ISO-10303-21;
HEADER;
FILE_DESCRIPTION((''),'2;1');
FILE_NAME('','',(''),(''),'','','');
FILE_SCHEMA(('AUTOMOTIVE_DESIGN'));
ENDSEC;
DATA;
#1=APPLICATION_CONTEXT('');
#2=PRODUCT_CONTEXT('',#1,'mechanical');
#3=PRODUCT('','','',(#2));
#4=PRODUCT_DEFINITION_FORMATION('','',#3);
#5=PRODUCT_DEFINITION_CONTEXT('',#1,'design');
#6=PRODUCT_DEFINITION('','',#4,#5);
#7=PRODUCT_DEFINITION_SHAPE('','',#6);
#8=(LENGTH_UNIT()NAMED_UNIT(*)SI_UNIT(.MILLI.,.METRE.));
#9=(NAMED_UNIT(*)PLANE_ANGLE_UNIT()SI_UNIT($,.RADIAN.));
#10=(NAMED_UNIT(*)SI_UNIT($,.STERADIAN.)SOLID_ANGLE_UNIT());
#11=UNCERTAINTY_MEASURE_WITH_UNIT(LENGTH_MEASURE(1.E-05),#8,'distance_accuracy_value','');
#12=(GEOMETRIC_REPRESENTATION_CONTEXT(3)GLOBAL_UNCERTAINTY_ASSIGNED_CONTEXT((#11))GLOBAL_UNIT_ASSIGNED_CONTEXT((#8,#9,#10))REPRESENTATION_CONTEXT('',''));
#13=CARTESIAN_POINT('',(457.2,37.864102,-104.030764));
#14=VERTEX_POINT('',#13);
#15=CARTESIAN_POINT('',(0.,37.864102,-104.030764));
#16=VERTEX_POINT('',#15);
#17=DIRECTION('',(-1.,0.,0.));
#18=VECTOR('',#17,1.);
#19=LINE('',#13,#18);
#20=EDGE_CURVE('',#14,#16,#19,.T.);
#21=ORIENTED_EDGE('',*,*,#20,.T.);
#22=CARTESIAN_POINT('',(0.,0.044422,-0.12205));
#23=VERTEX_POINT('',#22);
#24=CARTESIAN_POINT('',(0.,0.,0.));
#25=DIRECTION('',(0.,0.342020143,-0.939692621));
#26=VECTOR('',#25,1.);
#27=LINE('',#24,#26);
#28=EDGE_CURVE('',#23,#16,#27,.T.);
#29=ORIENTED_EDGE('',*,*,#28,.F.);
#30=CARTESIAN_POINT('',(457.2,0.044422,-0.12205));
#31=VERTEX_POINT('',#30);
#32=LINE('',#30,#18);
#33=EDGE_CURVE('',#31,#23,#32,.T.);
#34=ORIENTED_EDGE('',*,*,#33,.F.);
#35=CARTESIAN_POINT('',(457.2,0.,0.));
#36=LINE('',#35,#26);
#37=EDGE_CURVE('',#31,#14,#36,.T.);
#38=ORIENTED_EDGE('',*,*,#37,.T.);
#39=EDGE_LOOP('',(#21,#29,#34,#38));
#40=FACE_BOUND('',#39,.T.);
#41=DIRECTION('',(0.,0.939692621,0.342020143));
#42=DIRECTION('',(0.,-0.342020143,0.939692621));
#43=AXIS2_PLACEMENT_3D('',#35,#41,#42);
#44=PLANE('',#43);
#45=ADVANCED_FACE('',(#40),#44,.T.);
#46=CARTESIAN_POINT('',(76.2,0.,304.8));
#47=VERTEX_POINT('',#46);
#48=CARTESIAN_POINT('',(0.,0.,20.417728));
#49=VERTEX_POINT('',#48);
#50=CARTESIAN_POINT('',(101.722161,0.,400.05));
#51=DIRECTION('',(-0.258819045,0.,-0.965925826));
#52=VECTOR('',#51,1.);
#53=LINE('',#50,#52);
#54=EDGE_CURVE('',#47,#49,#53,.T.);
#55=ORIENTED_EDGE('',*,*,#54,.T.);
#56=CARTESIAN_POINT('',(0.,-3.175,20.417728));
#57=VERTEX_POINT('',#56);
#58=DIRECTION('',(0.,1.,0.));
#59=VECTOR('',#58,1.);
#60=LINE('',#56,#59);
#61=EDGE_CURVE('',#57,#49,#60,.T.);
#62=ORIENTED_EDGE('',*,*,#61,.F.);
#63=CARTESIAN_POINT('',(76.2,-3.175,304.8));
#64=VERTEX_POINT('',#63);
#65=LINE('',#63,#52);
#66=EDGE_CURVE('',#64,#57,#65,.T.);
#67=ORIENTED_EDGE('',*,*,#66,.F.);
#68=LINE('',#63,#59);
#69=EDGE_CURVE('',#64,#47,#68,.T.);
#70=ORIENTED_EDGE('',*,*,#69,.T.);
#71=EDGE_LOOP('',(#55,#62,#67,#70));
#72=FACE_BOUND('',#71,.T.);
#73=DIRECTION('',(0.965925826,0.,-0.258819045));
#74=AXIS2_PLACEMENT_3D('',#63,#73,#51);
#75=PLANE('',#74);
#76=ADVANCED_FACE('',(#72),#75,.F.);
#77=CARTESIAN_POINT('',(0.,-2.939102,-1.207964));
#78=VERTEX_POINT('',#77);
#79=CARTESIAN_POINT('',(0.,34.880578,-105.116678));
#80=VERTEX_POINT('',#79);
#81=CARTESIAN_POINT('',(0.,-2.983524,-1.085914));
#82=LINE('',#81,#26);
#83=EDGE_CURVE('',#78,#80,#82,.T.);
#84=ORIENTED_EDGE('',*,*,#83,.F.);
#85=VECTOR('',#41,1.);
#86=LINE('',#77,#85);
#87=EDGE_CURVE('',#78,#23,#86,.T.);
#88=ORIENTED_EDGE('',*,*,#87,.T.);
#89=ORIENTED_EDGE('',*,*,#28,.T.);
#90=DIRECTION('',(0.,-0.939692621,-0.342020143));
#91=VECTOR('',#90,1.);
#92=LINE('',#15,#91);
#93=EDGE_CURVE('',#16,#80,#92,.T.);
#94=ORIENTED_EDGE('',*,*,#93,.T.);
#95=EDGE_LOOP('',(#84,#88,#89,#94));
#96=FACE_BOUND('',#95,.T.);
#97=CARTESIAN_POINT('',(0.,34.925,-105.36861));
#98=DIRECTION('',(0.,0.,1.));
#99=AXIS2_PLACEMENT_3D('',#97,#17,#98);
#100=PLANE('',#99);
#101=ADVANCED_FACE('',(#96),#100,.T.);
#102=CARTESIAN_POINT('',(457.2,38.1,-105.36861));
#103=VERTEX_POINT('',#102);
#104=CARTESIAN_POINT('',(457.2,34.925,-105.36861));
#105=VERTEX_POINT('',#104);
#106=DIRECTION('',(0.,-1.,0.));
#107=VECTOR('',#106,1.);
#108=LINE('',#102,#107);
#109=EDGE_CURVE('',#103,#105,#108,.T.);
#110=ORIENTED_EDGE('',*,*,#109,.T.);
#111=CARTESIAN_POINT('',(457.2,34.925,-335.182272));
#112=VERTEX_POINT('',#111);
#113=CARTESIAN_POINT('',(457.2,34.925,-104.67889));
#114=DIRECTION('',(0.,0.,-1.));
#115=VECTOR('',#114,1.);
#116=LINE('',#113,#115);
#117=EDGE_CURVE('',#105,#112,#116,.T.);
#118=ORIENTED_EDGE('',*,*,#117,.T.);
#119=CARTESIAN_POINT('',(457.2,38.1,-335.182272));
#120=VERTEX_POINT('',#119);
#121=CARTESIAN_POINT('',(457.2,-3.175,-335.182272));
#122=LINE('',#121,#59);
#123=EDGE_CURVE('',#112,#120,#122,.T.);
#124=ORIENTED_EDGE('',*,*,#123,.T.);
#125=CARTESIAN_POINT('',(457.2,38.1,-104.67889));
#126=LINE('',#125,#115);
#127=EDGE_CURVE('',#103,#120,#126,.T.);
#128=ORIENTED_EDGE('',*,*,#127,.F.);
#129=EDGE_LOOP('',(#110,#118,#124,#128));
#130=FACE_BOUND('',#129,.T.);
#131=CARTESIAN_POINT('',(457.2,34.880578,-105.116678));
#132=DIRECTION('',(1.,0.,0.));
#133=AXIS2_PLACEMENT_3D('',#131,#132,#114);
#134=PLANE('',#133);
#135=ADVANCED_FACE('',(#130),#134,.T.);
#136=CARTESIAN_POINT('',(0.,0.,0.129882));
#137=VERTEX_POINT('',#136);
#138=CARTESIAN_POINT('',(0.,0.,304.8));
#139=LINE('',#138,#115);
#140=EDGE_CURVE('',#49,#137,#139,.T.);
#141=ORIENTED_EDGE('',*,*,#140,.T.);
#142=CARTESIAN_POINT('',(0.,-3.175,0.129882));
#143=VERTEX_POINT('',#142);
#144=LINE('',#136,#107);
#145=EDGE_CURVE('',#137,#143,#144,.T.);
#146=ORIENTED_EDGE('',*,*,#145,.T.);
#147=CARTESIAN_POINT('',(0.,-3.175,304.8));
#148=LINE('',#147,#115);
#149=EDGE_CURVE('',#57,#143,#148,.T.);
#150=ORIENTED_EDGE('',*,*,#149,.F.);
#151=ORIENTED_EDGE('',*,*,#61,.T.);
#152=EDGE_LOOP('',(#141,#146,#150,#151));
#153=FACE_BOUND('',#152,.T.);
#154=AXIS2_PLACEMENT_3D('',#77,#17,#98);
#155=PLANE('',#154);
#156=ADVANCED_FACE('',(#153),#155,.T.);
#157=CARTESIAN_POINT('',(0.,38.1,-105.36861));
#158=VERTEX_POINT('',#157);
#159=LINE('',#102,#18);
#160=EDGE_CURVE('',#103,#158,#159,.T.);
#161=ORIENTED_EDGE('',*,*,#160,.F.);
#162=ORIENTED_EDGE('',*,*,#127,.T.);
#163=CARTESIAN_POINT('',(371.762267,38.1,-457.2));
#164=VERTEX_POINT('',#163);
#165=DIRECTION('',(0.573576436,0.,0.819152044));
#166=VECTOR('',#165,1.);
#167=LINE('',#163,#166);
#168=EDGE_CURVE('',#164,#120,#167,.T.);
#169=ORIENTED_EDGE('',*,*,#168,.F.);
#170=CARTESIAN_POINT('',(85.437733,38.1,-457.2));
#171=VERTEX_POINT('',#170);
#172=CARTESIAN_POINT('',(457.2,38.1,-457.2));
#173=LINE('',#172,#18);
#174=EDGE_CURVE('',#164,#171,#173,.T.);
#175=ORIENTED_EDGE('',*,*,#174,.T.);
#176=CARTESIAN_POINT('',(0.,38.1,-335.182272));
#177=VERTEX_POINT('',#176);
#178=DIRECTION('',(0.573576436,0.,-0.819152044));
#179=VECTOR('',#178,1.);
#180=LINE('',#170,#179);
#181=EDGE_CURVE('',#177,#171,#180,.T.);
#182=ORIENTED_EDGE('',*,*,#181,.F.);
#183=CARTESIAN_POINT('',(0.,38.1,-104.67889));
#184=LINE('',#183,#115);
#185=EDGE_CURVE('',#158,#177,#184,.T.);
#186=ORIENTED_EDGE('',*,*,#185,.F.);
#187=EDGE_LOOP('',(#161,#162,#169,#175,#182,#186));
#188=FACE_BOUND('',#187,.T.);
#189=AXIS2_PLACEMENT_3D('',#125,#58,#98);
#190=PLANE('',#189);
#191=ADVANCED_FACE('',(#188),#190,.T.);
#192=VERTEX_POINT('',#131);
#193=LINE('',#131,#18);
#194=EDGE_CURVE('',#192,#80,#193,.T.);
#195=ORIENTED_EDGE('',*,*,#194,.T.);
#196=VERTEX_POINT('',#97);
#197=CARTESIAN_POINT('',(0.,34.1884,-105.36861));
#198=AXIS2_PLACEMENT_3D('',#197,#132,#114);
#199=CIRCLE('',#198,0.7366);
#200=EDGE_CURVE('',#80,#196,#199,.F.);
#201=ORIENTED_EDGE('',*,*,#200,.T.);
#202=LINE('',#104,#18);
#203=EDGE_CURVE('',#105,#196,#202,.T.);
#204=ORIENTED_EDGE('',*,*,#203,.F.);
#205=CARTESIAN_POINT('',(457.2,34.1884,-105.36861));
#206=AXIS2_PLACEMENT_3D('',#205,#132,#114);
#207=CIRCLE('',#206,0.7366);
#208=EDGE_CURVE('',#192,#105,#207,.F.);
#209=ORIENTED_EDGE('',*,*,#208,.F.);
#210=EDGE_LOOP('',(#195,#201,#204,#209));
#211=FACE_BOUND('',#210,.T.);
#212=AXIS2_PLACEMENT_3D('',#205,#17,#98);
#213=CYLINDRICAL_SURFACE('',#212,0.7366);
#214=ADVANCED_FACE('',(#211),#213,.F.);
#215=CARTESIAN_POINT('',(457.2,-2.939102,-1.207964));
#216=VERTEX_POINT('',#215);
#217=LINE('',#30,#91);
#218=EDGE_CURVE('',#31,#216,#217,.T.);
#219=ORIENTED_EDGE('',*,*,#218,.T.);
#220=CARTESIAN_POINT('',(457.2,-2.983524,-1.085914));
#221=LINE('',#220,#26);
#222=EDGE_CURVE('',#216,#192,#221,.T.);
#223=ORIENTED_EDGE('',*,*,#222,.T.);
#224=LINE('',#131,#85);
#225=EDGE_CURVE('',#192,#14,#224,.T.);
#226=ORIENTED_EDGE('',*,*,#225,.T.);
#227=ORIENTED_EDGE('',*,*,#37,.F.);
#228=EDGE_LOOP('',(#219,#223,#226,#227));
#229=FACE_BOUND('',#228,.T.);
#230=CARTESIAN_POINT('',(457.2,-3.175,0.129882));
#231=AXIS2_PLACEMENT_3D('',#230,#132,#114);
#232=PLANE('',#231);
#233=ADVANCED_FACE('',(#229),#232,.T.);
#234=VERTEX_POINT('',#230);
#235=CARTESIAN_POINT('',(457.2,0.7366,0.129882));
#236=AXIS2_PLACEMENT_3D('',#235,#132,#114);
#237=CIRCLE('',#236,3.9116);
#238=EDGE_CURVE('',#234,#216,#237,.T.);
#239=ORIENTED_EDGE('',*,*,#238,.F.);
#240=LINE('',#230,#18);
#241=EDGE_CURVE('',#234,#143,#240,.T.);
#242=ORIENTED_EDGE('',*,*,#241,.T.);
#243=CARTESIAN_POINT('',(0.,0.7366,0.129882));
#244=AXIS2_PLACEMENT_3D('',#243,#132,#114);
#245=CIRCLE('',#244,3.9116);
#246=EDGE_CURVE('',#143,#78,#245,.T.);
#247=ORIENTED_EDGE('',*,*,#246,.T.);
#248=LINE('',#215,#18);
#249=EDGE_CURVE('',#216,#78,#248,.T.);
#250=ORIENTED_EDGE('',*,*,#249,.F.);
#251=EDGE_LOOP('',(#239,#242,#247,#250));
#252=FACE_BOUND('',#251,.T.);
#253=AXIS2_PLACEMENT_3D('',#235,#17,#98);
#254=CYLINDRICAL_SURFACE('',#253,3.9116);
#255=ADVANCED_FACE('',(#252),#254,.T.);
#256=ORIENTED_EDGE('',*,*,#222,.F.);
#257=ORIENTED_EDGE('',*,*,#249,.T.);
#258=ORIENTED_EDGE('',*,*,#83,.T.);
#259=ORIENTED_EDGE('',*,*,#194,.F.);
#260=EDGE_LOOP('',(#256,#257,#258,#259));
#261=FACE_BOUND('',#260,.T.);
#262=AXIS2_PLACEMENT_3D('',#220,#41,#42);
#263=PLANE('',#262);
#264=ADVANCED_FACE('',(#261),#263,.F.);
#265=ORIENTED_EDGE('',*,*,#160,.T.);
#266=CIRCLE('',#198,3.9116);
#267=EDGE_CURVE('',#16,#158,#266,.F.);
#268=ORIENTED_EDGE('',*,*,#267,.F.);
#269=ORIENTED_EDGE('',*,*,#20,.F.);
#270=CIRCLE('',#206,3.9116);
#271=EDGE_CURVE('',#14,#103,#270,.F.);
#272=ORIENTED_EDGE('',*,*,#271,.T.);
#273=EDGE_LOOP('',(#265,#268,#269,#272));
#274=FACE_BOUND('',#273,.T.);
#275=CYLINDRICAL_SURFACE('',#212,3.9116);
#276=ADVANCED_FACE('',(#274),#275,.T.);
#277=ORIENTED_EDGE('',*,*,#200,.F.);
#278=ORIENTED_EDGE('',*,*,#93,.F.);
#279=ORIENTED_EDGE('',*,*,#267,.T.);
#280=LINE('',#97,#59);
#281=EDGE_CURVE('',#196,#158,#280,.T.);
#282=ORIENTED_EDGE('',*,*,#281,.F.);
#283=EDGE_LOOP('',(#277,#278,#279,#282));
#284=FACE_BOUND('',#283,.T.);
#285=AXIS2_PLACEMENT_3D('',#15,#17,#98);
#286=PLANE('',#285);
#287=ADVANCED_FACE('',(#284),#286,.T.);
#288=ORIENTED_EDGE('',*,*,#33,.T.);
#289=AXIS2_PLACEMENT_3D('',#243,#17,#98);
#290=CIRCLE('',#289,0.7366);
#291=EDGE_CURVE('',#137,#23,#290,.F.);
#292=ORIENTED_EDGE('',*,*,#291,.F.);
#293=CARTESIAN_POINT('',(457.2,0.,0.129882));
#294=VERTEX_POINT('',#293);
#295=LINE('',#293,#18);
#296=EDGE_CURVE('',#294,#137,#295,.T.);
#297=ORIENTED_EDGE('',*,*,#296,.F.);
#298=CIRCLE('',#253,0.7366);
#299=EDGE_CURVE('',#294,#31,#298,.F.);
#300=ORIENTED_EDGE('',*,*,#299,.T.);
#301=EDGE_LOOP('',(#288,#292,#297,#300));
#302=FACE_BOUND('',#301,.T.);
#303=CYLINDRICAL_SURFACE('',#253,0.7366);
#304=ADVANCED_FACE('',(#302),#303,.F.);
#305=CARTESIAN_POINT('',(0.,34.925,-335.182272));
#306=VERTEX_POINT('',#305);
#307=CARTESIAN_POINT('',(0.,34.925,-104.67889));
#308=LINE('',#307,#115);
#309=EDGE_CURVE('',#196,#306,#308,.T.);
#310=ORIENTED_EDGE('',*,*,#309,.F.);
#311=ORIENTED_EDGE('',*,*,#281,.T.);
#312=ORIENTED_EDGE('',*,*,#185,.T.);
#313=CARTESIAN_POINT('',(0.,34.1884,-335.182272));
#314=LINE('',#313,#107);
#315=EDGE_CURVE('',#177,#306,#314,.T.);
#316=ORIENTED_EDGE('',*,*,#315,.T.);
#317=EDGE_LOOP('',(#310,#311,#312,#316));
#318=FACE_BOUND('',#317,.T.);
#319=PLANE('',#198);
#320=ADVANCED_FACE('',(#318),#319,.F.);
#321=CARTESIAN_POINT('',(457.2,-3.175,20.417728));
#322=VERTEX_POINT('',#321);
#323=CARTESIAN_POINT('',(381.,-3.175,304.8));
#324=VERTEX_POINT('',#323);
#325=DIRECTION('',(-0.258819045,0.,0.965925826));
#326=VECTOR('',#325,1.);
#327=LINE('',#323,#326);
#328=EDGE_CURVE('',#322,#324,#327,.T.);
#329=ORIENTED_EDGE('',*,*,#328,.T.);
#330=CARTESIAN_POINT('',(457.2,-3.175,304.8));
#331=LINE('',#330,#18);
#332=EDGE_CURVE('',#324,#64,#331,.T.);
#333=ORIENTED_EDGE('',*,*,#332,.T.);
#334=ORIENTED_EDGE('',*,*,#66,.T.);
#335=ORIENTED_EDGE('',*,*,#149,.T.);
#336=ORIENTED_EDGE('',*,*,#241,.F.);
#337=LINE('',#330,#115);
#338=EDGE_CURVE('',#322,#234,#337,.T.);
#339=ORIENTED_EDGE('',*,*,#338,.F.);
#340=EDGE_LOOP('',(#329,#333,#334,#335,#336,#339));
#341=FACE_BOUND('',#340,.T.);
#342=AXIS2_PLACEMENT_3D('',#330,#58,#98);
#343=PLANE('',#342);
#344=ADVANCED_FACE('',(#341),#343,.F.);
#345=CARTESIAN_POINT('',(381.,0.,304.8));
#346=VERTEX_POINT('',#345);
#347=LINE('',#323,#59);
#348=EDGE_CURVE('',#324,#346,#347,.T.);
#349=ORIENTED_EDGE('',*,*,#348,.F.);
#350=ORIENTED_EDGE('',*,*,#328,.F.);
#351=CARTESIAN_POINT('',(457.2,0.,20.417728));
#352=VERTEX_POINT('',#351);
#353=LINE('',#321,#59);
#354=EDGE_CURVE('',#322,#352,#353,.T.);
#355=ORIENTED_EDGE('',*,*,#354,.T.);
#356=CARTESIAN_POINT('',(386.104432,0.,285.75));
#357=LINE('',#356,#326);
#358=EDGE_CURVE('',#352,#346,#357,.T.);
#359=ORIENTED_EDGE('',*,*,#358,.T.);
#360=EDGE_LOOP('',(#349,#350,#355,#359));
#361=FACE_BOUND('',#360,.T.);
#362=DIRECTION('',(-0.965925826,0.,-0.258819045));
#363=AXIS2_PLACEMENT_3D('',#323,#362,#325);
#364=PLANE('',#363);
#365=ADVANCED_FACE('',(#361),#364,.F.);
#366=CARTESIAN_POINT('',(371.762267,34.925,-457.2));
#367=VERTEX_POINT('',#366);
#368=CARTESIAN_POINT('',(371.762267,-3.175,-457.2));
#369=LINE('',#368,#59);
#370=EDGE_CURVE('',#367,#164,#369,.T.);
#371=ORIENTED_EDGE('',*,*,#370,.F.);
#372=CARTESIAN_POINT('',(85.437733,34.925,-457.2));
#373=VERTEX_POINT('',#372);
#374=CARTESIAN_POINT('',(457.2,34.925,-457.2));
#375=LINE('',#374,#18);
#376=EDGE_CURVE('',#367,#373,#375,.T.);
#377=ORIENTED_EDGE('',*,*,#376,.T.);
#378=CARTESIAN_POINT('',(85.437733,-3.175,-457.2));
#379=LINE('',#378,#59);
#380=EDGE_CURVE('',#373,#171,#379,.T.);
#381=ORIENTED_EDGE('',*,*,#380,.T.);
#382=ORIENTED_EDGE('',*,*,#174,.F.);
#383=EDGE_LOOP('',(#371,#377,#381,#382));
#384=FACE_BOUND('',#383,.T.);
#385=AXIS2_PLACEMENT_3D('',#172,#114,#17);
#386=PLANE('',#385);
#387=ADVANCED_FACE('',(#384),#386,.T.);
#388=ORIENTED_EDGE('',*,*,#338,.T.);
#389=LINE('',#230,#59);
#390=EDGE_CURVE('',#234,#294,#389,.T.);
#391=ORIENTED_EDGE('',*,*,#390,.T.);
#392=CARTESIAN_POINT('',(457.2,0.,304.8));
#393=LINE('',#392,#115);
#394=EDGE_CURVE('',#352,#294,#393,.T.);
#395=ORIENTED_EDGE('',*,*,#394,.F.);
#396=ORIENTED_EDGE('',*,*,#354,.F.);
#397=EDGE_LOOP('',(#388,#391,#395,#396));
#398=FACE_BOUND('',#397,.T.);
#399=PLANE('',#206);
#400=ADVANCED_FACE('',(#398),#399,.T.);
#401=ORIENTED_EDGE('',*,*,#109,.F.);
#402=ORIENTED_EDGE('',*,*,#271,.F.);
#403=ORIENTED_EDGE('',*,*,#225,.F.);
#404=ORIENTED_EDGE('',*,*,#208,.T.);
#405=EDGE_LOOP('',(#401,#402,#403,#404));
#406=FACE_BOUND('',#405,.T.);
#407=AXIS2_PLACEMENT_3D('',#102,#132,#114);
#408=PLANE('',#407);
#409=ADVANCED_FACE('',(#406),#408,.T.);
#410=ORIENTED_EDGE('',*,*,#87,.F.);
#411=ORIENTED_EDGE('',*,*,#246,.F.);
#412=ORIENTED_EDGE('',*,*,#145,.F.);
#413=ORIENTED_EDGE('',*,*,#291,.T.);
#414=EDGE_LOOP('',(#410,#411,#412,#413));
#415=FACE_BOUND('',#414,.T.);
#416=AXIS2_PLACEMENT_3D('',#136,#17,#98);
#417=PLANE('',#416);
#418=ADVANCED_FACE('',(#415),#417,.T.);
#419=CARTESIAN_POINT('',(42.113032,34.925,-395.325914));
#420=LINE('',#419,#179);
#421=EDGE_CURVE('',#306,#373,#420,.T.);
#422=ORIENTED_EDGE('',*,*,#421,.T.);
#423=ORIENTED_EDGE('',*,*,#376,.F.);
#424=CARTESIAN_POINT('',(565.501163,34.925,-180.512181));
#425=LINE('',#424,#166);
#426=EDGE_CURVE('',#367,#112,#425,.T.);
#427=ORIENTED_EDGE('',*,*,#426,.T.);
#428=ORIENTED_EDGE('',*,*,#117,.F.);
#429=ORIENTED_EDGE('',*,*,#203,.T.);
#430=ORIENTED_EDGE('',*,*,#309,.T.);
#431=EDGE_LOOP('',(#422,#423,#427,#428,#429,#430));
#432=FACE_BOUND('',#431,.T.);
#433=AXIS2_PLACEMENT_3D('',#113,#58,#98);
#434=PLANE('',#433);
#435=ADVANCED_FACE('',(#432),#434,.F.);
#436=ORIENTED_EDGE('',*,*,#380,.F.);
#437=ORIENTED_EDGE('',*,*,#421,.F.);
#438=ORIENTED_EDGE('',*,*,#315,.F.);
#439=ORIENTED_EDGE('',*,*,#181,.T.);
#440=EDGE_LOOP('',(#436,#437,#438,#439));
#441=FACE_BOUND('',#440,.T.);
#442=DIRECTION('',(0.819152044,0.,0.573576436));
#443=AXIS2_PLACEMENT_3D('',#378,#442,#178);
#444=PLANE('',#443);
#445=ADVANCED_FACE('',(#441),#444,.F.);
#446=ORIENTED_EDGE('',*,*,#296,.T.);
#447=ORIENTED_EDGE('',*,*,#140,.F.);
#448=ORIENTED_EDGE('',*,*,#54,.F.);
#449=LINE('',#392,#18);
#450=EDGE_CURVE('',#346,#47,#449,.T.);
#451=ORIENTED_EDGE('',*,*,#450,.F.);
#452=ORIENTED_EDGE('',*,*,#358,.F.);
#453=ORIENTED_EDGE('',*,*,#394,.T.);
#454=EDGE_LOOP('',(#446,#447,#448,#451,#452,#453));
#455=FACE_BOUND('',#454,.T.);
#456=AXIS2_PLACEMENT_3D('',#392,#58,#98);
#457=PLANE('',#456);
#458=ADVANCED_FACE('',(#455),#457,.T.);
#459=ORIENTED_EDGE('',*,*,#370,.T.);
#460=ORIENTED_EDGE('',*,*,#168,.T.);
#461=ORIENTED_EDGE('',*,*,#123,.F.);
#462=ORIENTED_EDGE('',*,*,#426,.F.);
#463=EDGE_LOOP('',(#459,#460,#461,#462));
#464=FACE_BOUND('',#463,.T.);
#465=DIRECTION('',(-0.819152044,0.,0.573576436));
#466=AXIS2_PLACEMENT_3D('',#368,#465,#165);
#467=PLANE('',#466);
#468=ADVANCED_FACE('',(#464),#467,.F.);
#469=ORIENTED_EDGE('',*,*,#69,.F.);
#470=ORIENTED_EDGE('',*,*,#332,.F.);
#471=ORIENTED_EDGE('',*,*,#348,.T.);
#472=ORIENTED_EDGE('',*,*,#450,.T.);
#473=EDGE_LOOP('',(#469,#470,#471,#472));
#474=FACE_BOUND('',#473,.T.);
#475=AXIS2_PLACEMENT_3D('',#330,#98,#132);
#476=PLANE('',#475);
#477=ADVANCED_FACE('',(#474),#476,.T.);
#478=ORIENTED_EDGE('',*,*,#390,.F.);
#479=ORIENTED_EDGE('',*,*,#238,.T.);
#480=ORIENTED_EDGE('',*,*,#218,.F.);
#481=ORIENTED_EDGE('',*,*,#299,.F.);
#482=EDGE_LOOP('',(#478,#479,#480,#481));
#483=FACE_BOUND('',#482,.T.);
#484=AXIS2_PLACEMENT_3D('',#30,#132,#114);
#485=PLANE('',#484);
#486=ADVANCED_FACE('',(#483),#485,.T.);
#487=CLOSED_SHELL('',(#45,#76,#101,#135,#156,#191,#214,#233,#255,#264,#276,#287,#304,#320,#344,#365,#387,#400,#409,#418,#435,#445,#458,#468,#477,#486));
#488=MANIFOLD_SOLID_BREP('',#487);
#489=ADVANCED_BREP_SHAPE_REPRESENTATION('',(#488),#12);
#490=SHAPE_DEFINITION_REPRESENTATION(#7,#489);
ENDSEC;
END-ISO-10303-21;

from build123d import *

# Parameters (mm, degrees)
BASE_FLANGE1_DEPTH      = 457.2
CUT_EXTRUDE1_DEPTH      = 648.7
CUT_EXTRUDE1_DEPTH_BACK = 648.7


# Sheet-metal steps are written as plain solids
with BuildPart() as part:
    # Sketch1 → Base-Flange1 (new body)
    with BuildSketch(Plane(origin=(0, 0, 0), x_dir=(0, 0, -1), z_dir=(1, 0, 0))):
        with BuildLine():
            Line((-304.8, 0), (-0.129882454, 0))
            ThreePointArc((-0.129882454, 0), (-0.001973206, 0.011190609), (0.122049584, 0.044422416))
            Line((0.122049584, 0.044422416), (104.030764306, 37.864101655))
            ThreePointArc((104.030764306, 37.864101655), (104.689368087, 38.040574007), (105.368610299, 38.1))
            Line((105.368610299, 38.1), (457.2, 38.1))
            Line((457.2, 38.1), (457.2, 34.925))
            Line((457.2, 34.925), (105.368610299, 34.925))
            ThreePointArc((105.368610299, 34.925), (105.240701051, 34.913809391), (105.116678261, 34.880577584))
            Line((105.116678261, 34.880577584), (1.207963539, -2.939101655))
            ThreePointArc((1.207963539, -2.939101655), (0.549359758, -3.115574007), (-0.129882454, -3.175))
            Line((-0.129882454, -3.175), (-304.8, -3.175))
            Line((-304.8, -3.175), (-304.8, 0))
        make_face()
    extrude(amount=BASE_FLANGE1_DEPTH)

    # Sketch6 → Cut-Extrude1 (cut, two sides: drawn at the far end of the back side and taken through both)
    with BuildSketch(Plane(origin=(0, 0, 0), x_dir=(1, 0, 0), z_dir=(0, 1, 0)).offset(-CUT_EXTRUDE1_DEPTH_BACK)):
        Polygon((0, -304.8), (76.2, -304.8), (0, -20.417728463), align=None)
        Polygon((0, 335.182271537), (0, 457.2), (85.437733265, 457.2), align=None)
        Polygon((457.2, 457.2), (371.762266735, 457.2), (457.2, 335.182271537), align=None)
        Polygon((381, -304.8), (457.2, -20.417728463), (457.2, -304.8), align=None)
    extrude(amount=CUT_EXTRUDE1_DEPTH + CUT_EXTRUDE1_DEPTH_BACK, mode=Mode.SUBTRACT)


solid = part.part
